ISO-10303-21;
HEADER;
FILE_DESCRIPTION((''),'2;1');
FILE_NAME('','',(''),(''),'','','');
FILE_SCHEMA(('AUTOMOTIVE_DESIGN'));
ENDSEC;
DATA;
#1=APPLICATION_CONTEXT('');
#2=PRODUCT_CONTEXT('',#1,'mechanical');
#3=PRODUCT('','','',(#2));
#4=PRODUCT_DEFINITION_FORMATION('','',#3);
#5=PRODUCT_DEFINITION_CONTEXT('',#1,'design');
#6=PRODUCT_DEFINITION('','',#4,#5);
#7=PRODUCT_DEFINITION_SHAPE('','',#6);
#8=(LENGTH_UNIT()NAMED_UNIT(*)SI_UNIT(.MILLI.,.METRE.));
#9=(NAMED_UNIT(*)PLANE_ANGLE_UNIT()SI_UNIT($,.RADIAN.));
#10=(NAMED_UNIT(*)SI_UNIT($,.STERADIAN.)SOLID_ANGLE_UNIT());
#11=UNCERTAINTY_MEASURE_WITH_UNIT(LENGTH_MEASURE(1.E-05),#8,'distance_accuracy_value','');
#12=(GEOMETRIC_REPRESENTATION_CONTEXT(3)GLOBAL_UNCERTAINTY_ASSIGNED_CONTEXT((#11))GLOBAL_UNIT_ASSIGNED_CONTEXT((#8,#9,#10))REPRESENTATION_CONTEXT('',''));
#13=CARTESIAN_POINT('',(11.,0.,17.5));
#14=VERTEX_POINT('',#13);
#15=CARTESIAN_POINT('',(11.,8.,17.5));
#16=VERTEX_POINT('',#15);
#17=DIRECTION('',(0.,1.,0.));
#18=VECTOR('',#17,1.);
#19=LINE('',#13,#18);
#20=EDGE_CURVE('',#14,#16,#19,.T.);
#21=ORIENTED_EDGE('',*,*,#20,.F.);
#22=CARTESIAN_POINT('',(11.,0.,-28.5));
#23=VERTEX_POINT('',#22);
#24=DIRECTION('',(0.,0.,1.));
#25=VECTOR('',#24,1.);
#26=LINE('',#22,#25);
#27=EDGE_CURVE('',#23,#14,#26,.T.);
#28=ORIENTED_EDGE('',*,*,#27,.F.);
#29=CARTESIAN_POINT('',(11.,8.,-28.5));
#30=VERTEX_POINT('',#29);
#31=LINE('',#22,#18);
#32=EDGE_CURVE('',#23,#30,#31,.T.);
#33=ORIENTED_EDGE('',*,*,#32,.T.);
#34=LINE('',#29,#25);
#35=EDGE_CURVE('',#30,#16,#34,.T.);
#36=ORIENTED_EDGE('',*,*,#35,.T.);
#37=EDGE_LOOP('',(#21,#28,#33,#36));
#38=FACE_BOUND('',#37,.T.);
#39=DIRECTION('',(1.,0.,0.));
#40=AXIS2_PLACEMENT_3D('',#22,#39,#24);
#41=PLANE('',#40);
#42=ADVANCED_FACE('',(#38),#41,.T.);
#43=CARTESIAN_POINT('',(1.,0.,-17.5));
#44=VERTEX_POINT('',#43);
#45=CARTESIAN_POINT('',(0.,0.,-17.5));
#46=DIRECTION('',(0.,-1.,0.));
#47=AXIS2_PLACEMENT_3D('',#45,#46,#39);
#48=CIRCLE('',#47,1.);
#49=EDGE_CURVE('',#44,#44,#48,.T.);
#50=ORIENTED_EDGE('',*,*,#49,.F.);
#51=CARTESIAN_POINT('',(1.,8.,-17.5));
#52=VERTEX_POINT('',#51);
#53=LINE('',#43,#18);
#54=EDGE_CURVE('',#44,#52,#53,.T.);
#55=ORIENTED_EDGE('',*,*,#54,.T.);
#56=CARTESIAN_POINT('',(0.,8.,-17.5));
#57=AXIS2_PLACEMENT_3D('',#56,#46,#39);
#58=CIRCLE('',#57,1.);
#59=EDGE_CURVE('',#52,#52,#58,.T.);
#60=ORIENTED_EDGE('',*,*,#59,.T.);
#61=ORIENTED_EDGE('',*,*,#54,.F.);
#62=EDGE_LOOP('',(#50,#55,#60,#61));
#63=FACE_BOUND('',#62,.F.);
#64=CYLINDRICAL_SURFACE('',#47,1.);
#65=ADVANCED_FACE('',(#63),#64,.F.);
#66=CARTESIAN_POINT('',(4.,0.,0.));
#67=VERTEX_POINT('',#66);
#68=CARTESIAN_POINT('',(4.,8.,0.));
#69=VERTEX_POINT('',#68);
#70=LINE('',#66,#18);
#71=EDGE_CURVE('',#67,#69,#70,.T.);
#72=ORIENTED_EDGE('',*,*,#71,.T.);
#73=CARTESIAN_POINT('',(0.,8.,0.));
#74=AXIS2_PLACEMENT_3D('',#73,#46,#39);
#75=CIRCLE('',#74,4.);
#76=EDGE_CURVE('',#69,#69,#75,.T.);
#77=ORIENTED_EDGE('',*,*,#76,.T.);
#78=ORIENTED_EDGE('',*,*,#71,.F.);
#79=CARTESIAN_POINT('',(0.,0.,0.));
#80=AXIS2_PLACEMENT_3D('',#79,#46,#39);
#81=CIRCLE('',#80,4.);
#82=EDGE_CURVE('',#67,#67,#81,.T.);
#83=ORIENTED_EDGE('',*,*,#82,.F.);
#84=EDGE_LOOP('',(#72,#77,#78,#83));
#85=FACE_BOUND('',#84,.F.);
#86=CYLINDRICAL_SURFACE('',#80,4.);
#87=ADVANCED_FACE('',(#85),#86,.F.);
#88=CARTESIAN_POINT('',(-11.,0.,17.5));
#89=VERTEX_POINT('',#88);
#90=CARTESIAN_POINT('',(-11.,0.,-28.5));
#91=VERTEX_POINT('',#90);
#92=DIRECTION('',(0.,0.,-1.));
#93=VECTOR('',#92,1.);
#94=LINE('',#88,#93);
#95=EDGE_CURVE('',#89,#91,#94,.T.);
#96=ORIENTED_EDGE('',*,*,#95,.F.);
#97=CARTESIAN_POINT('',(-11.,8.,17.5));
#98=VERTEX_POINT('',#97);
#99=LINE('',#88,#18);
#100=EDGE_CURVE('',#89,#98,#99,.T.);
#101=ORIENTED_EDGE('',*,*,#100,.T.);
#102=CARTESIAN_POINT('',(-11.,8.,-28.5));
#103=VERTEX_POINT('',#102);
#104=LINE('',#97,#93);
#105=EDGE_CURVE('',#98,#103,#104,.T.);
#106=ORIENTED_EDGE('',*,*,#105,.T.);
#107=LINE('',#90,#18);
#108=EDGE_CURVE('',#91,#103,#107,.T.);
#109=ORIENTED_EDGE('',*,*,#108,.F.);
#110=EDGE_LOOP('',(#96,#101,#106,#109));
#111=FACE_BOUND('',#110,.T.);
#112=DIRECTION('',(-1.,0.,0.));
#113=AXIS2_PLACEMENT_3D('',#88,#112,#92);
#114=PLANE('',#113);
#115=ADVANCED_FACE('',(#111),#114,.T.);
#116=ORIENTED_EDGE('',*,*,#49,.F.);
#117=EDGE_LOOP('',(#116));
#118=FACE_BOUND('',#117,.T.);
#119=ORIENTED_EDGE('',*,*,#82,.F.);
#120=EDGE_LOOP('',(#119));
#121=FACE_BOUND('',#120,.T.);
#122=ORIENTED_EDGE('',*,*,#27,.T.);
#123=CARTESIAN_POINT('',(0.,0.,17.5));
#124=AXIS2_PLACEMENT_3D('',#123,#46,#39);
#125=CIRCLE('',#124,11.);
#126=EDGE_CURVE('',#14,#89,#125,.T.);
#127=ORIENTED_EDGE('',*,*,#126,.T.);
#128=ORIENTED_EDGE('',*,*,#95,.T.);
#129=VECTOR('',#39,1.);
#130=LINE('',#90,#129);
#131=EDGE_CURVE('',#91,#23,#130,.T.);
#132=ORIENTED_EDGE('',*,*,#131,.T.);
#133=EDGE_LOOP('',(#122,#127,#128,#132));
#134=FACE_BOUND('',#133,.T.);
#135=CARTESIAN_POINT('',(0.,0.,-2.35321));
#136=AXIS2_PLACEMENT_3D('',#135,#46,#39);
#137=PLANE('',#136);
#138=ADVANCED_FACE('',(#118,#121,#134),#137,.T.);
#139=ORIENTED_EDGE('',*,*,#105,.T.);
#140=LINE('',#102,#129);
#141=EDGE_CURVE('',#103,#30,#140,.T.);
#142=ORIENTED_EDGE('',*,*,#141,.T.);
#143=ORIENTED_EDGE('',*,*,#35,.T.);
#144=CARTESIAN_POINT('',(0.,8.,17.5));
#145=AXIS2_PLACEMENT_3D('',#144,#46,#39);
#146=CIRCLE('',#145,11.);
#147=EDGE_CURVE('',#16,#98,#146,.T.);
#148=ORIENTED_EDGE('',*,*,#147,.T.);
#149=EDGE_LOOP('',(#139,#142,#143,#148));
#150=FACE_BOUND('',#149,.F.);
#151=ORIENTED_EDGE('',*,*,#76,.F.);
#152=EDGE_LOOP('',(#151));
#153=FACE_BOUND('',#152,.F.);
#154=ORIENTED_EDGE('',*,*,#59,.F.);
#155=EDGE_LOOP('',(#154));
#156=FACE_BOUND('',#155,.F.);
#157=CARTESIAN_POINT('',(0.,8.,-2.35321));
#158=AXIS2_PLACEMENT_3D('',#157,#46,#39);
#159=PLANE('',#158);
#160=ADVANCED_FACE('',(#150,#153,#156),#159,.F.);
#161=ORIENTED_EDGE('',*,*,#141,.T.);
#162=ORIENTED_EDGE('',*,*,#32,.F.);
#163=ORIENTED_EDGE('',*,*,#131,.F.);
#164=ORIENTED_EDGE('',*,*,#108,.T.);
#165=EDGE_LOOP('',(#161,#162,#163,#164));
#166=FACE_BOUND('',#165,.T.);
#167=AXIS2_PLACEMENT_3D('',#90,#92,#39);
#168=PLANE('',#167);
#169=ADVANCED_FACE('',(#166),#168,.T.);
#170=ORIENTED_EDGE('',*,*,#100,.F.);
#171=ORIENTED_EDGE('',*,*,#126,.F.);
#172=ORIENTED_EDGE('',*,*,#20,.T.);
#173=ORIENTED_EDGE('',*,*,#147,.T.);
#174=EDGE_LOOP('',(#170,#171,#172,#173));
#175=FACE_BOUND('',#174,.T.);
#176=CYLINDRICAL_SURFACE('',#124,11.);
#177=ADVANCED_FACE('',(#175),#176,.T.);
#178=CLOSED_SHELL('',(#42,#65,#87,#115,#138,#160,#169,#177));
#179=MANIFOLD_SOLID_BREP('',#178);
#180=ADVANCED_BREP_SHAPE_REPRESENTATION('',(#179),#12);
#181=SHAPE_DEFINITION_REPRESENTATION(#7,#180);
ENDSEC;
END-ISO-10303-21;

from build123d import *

# Parameters (mm, degrees)
F0_R     = 1
F0_R_2   = 4
F1_DEPTH = 8


# Not quite as in the source:
# - a feature names something its author has since deleted; it is built from what else it names


with BuildPart() as f1:
    # F0 (on Front) → F1 (new body)
    with BuildSketch(Plane.XZ):
        with BuildLine():
            Line((11, -17.5), (11, 17.5))
            ThreePointArc((11, 17.5), (0, 28.5), (-11, 17.5))
            Line((-11, 17.5), (-11, -17.5))
            Line((-11, -17.5), (-11, -28.5))
            Line((-11, -28.5), (0, -28.5))
            Line((0, -28.5), (11, -28.5))
            Line((11, -28.5), (11, -17.5))
        make_face()
        with Locations((0, -17.5)):
            Circle(F0_R, mode=Mode.SUBTRACT)
        Circle(F0_R_2, mode=Mode.SUBTRACT)
    extrude(amount=-F1_DEPTH)


solid = f1.part
